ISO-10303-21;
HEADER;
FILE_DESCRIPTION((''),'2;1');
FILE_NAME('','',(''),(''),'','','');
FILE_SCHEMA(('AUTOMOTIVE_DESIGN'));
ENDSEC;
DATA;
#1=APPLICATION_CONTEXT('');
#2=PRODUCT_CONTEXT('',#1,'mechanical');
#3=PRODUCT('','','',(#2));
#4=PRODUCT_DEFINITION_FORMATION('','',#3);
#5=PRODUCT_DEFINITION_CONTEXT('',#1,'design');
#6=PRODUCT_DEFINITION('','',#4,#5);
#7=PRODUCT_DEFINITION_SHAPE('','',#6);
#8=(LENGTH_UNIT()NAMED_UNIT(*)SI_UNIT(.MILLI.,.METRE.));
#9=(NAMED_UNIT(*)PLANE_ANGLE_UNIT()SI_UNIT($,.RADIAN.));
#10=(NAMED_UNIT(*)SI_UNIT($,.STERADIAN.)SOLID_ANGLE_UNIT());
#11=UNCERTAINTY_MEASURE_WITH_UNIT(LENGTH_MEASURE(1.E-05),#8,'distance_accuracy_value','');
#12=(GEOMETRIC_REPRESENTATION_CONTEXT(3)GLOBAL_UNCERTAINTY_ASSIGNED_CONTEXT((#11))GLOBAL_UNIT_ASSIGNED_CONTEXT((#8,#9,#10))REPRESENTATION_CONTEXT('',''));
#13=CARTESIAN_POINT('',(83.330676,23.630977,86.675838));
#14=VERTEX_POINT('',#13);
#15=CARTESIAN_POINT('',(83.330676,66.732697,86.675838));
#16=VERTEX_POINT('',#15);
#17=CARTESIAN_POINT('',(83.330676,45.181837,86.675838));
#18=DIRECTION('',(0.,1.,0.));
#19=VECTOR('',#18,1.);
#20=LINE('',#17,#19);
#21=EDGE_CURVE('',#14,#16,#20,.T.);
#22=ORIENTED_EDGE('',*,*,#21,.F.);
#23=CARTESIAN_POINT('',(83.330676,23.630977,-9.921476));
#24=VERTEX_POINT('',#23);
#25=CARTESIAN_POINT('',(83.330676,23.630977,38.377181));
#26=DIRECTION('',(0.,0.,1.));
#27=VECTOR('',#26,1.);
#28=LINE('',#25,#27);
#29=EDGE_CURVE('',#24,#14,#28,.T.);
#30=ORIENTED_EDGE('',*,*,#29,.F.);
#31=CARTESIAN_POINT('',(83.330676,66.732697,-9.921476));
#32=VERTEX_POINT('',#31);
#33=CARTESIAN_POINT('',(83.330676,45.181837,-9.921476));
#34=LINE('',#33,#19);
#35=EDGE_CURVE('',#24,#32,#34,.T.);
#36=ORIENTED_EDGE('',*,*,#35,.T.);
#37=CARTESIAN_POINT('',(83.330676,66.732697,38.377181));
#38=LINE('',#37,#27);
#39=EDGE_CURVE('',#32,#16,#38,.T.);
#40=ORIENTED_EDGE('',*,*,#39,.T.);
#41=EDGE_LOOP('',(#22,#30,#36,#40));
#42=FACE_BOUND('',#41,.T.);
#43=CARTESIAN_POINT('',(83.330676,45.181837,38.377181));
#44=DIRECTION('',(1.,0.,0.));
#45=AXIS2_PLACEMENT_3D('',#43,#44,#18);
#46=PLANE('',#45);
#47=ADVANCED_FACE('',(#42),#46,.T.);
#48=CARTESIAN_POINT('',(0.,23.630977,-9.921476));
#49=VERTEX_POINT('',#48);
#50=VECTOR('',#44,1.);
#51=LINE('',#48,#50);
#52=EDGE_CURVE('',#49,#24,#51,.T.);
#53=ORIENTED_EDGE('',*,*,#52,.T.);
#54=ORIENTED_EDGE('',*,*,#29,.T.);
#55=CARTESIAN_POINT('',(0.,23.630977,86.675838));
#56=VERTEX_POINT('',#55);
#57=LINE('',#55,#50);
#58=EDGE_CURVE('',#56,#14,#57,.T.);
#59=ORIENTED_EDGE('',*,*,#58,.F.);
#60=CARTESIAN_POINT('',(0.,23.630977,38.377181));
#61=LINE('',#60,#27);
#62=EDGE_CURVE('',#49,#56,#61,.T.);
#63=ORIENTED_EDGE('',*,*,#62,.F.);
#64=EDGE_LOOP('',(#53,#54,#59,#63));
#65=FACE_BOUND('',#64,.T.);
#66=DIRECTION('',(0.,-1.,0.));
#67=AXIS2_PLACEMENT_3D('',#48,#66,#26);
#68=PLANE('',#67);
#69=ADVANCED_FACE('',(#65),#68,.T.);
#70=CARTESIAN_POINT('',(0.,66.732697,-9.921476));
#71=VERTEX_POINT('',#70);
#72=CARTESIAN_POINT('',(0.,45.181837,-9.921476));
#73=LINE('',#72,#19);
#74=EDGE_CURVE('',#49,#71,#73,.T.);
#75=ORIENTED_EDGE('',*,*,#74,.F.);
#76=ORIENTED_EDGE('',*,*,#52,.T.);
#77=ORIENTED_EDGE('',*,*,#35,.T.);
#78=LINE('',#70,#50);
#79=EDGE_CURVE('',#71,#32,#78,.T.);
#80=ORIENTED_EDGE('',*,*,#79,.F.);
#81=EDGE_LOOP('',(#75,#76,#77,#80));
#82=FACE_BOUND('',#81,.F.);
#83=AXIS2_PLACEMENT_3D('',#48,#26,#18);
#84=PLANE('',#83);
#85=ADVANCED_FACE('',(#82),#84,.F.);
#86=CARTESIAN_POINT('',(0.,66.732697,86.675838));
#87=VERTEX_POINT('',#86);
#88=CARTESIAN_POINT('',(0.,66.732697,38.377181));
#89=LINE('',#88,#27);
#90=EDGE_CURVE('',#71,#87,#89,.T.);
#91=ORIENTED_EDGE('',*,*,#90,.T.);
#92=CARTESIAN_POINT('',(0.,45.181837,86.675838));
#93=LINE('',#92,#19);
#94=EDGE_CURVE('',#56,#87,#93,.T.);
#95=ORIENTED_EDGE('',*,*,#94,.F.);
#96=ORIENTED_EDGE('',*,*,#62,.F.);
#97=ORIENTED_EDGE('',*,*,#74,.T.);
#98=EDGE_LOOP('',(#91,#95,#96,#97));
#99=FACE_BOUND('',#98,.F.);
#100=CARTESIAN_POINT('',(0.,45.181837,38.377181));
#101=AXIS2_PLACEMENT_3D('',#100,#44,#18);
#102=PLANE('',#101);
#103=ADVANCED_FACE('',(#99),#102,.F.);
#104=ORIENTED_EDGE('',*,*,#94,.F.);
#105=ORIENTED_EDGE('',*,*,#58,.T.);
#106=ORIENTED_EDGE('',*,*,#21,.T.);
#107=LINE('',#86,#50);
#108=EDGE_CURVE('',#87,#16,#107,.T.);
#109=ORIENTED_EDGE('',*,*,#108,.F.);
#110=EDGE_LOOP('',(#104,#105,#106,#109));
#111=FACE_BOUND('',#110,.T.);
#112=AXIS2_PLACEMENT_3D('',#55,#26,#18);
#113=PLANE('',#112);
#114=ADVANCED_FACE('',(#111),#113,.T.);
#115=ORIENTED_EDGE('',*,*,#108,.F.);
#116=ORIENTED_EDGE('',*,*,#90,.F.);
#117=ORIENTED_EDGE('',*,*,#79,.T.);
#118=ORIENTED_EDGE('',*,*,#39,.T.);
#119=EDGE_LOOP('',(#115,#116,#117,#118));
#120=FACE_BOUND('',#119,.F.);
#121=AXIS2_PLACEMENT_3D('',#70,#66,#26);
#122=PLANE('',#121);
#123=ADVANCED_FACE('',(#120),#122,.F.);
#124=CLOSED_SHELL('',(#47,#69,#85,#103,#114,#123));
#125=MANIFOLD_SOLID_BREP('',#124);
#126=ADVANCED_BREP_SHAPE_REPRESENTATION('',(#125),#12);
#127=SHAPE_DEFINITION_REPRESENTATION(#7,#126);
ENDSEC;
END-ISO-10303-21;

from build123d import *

# Parameters (mm, degrees)
F1_W     = 43.1017205119
F1_H     = 96.5973138809
F2_DEPTH = 83.3306759596


with BuildPart() as f2:
    # F1 (on face) → F2 (new body)
    with BuildSketch(Plane.YZ):
        with Locations((45.1818369329, 38.3771806955)):
            Rectangle(F1_W, F1_H)
    extrude(amount=F2_DEPTH)


solid = f2.part
